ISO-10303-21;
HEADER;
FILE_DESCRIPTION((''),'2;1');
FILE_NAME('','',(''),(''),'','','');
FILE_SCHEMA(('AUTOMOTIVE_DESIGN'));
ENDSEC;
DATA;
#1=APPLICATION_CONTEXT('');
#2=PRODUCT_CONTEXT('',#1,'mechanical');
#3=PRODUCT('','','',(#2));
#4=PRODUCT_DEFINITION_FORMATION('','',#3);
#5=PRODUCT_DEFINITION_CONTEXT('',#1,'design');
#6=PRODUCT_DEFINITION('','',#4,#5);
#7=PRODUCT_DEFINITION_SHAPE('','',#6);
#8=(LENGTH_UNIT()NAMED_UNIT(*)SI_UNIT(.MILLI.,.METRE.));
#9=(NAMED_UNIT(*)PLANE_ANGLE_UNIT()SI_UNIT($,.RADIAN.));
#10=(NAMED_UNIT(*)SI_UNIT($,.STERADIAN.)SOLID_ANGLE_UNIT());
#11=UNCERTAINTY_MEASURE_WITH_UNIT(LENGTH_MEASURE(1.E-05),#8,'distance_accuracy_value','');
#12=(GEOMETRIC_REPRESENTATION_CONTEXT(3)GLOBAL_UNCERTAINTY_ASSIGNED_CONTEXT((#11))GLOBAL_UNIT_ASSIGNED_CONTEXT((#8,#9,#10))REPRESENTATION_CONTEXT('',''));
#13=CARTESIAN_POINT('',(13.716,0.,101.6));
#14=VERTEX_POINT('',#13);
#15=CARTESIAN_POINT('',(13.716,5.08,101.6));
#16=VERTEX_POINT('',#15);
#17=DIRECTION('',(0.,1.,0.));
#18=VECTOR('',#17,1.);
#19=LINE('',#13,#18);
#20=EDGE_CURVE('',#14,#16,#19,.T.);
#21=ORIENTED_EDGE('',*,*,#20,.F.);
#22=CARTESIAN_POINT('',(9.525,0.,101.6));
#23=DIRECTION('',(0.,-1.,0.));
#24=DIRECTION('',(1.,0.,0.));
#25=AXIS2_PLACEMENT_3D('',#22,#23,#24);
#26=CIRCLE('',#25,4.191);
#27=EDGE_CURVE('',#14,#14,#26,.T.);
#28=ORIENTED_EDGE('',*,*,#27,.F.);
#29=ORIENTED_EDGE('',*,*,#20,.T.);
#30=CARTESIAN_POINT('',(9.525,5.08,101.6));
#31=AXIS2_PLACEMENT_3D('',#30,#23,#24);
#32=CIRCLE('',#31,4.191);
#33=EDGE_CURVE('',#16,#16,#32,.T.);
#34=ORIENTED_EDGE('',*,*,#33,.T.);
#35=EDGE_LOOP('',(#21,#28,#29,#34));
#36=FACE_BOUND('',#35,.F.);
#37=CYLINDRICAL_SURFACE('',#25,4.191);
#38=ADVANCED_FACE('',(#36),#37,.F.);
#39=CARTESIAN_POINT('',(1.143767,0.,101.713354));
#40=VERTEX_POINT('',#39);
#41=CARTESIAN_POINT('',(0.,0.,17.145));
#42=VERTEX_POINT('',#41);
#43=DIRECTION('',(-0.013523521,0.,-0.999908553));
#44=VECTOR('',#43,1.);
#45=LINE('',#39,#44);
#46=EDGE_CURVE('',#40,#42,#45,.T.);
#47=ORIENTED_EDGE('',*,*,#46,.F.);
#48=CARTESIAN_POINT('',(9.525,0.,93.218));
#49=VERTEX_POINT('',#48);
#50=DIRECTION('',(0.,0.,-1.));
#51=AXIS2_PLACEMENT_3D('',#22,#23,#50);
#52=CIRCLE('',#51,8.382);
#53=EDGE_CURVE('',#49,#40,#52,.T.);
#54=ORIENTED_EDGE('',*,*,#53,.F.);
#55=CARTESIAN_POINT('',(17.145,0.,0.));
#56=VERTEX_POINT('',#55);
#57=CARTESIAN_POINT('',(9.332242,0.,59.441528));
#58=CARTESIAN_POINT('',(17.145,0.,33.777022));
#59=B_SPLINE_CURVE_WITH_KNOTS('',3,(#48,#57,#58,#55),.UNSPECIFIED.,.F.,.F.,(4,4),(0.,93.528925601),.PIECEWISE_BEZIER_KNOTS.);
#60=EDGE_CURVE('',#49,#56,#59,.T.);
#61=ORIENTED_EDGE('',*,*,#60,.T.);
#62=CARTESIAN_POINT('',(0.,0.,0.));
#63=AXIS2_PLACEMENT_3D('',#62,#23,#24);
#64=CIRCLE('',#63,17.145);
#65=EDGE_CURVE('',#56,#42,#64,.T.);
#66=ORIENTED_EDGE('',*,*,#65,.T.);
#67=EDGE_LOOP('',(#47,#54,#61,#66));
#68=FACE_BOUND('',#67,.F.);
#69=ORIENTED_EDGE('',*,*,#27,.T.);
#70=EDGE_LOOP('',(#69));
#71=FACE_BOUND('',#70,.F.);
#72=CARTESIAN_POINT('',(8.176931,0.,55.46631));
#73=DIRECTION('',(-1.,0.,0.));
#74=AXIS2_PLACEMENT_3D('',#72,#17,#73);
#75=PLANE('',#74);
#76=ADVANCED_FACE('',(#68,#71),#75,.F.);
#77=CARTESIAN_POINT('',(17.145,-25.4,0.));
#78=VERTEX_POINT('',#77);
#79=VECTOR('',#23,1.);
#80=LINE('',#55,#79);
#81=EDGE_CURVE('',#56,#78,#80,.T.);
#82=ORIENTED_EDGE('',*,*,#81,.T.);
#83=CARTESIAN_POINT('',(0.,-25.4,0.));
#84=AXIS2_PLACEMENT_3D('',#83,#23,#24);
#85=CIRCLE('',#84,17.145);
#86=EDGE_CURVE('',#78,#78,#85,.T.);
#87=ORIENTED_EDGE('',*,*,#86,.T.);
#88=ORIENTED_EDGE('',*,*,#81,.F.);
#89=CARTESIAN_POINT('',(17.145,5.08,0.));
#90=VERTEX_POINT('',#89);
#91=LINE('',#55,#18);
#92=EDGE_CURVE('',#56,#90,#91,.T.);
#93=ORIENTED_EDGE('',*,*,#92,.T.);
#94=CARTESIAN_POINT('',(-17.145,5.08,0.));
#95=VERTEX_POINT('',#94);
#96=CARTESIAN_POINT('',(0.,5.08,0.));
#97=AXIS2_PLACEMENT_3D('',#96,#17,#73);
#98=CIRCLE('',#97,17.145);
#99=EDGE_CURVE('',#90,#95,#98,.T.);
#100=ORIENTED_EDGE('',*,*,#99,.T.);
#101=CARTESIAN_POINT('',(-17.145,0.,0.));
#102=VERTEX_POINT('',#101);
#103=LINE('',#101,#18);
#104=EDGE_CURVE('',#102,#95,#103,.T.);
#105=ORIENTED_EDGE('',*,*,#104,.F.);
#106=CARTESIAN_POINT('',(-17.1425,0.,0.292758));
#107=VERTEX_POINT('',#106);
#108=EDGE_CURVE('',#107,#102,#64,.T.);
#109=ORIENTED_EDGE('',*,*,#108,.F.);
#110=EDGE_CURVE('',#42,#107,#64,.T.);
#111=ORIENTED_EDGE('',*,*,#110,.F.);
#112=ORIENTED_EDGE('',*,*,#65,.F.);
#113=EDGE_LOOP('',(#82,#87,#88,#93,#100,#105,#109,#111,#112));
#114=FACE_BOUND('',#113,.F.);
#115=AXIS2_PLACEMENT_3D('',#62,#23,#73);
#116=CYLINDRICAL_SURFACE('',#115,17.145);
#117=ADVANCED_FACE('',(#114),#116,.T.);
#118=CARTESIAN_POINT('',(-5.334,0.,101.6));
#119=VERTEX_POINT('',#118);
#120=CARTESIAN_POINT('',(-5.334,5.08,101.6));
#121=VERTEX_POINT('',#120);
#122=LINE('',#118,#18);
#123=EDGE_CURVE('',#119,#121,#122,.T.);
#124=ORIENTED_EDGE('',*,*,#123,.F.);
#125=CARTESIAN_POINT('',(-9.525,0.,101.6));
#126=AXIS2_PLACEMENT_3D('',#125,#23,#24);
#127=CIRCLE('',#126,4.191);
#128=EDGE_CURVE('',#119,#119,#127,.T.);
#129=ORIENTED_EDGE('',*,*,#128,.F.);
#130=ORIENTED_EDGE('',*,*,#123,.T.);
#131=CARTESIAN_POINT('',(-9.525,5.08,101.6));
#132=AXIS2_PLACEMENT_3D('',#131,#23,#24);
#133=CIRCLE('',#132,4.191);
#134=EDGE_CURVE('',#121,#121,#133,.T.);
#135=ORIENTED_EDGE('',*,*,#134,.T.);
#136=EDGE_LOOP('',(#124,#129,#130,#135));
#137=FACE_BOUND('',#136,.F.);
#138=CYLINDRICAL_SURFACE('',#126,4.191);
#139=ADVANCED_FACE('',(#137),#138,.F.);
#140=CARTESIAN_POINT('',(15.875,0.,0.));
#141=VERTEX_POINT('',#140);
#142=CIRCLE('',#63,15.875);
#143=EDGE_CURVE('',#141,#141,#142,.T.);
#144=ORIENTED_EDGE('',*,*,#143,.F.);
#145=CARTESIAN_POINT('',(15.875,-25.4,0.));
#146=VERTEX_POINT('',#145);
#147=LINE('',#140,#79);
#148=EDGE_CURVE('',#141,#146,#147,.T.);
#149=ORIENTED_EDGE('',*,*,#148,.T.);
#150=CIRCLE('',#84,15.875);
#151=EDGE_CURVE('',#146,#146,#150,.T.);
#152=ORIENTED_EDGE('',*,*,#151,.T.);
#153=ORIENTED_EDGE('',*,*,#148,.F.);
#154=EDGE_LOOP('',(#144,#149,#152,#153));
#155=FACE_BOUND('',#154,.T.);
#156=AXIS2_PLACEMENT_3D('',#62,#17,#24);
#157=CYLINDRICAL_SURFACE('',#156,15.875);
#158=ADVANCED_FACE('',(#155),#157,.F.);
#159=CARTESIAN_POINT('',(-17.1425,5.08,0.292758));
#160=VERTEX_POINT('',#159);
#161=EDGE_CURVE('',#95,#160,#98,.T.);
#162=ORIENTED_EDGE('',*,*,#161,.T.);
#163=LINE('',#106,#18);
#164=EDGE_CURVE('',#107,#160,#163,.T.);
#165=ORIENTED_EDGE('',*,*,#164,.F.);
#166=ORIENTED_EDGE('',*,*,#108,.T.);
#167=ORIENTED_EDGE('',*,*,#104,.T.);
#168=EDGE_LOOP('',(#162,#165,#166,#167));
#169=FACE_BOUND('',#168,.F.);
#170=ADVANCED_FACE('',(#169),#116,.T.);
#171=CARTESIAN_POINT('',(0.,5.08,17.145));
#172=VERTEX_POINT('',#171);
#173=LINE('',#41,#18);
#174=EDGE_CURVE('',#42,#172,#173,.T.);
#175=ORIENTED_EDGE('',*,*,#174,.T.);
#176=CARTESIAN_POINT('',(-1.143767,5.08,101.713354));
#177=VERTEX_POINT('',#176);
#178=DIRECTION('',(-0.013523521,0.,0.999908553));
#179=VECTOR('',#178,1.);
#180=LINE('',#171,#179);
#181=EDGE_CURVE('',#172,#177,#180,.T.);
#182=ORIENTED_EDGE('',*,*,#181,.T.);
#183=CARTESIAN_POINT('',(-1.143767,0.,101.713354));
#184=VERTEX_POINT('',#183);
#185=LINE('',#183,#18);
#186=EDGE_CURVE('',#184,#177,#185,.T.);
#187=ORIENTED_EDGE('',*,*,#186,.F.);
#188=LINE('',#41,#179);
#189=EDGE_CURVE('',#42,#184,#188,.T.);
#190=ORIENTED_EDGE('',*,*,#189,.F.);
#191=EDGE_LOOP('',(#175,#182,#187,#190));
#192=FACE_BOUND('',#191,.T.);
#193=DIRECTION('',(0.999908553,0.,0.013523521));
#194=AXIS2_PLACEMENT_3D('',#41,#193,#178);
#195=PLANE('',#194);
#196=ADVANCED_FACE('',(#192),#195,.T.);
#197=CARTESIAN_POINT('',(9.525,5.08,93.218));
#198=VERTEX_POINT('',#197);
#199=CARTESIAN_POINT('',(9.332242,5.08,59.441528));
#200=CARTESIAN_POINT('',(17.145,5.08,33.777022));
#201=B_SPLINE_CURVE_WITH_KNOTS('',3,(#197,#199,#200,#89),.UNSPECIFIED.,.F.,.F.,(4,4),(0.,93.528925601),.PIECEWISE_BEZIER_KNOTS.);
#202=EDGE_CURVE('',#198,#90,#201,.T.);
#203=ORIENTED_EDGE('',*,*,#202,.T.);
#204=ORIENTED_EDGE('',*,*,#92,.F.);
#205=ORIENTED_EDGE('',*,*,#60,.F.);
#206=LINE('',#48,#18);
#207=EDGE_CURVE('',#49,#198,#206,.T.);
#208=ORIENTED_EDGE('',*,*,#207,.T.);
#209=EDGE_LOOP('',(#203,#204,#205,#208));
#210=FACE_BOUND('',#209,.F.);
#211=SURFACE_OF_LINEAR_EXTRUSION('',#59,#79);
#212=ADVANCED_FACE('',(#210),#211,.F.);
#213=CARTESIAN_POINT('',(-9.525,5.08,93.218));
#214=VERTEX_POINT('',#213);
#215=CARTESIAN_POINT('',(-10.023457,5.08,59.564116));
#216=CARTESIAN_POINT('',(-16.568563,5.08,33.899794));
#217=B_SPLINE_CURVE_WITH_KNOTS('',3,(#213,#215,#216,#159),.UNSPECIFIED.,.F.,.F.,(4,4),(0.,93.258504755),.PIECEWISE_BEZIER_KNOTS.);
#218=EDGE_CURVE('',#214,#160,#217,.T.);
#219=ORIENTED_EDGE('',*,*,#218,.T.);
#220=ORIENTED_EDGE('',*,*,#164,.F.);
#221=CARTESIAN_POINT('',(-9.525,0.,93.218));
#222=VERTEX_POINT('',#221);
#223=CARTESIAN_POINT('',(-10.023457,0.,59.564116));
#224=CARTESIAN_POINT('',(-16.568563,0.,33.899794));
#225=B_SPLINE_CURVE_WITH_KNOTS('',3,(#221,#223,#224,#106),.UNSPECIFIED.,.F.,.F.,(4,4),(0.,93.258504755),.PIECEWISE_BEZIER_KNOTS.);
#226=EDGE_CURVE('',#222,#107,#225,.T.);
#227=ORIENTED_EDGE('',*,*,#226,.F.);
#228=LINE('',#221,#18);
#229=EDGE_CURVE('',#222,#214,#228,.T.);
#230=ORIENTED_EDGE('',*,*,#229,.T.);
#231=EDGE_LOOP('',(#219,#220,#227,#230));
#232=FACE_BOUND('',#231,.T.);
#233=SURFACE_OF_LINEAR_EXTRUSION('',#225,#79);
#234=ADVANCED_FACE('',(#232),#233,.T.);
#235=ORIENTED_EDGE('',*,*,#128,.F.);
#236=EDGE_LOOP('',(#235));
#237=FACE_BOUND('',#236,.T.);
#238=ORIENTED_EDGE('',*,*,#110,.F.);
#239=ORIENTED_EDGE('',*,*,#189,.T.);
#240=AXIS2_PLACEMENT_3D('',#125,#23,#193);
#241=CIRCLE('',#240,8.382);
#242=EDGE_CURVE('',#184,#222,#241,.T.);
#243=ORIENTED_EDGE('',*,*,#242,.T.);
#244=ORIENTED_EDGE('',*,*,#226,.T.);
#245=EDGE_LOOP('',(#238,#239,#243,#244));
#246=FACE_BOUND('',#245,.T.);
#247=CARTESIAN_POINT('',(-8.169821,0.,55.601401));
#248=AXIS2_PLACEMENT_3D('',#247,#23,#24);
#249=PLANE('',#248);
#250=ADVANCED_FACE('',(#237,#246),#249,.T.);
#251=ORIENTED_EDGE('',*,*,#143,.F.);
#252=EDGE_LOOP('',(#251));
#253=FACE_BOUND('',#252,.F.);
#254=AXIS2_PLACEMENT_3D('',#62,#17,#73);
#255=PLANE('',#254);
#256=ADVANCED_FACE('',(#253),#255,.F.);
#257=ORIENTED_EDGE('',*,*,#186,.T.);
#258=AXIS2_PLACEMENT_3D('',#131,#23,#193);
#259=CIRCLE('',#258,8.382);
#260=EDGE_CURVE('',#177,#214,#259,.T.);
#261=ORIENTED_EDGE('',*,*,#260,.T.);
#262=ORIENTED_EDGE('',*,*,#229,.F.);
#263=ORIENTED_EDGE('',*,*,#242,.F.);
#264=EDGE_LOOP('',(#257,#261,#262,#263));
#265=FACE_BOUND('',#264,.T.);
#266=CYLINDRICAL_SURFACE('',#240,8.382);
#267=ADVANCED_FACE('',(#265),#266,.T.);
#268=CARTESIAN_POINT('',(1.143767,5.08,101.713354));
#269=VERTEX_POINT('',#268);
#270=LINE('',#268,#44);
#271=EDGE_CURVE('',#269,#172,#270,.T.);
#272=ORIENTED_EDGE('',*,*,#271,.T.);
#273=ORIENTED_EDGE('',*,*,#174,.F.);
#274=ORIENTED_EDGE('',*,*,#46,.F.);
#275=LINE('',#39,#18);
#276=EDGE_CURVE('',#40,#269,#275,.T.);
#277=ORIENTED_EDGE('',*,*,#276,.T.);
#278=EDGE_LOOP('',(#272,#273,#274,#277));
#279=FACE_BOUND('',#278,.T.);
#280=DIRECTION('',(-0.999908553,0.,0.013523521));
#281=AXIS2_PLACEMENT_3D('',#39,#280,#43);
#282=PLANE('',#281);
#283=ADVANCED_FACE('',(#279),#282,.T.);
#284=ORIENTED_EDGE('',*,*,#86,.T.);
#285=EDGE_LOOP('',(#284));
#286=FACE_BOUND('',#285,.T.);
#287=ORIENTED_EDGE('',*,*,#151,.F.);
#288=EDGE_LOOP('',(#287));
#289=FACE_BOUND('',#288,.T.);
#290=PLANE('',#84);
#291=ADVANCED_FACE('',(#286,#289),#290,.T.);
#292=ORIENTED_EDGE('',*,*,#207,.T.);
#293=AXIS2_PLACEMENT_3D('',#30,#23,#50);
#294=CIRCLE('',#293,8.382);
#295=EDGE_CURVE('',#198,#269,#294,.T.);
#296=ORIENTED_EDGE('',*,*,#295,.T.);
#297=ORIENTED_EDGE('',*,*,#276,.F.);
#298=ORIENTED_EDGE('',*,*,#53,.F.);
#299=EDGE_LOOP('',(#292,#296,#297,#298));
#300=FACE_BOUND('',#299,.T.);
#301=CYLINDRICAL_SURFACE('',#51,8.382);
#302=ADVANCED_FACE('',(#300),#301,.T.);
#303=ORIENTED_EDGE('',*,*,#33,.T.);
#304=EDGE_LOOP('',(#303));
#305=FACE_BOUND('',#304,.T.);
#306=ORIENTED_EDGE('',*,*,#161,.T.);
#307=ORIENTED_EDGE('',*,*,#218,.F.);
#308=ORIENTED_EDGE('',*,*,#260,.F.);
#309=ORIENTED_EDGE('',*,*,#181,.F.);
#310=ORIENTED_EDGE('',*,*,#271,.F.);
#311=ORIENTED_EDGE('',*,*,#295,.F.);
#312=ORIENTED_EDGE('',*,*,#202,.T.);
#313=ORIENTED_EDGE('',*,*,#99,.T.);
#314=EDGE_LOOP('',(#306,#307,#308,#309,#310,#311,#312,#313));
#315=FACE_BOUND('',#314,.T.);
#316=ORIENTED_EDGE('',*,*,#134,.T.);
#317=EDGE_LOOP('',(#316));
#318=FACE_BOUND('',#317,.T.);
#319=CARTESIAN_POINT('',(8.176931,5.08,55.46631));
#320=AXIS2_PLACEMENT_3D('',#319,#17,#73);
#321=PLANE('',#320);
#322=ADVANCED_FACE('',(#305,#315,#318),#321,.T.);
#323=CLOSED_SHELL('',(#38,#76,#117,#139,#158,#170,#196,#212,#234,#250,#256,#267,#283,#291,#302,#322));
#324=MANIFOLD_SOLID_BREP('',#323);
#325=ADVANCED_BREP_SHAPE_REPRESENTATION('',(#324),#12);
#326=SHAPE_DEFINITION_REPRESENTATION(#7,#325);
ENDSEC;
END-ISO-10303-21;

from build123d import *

# Parameters (mm, degrees)
F0_R     = 17.145
F0_R_2   = 15.875
F1_DEPTH = 25.4
F2_R     = 17.145
F3_DEPTH = 5.08
F4_R     = 4.191
F5_DEPTH = 5.08


# Not quite as in the source:
# - after a boolean that leaves OpenCascade's solid faulty, fix() repairs it


with BuildPart() as f1:
    # F0 (on Front) → F1 (new body)
    with BuildSketch(Plane.XZ):
        Circle(F0_R)
        Circle(F0_R_2, mode=Mode.SUBTRACT)
    extrude(amount=F1_DEPTH)

    # F2 (on face) → F3 (join)
    with BuildSketch(Plane(origin=(0, 0, 0), x_dir=(-1, 0, 0), z_dir=(0, 1, 0))):
        Circle(F2_R)
    extrude(amount=F3_DEPTH)

    # F4 (on face) → F5 (join, through all)
    with BuildSketch(Plane.XZ):
        with BuildLine():
            add(Edge.make_bspline(
                [(9.525, 93.218), (9.3322422676, 59.4415284404), (17.145, 33.7770215762), (17.145, 0)],
                knots=[0, 0, 0, 0, 93.5289256006, 93.5289256006, 93.5289256006, 93.5289256006], degree=3))
            ThreePointArc((9.525, 93.218), (15.4919111989, 107.486755876), (1.1437665087, 101.7133541532))
            Line((1.1437665087, 101.7133541532), (0, 17.145))
            ThreePointArc((0, 17.145), (12.1233457634, 12.1233457634), (17.145, 0))
        make_face()
        with Locations((9.525, 101.6)):
            Circle(F4_R, mode=Mode.SUBTRACT)
        with BuildLine():
            ThreePointArc((-17.1425003406, 0.2927577006), (-12.0193946233, 12.2264131244), (0, 17.145))
            Line((0, 17.145), (-1.1437665087, 101.7133541532))
            ThreePointArc((-1.1437665087, 101.7133541532), (-15.4919111989, 107.486755876), (-9.525, 93.218))
            add(Edge.make_bspline(
                [(-9.525, 93.218), (-10.0234570054, 59.5641158888), (-16.5685631435, 33.8997937459), (-17.1425003406, 0.2927577006)],
                knots=[0, 0, 0, 0, 93.2585047549, 93.2585047549, 93.2585047549, 93.2585047549], degree=3))
        make_face()
        with Locations((-9.525, 101.6)):
            Circle(F4_R, mode=Mode.SUBTRACT)
    extrude(amount=-F5_DEPTH)

    add(f1.part.fix(), mode=Mode.REPLACE)


solid = f1.part
